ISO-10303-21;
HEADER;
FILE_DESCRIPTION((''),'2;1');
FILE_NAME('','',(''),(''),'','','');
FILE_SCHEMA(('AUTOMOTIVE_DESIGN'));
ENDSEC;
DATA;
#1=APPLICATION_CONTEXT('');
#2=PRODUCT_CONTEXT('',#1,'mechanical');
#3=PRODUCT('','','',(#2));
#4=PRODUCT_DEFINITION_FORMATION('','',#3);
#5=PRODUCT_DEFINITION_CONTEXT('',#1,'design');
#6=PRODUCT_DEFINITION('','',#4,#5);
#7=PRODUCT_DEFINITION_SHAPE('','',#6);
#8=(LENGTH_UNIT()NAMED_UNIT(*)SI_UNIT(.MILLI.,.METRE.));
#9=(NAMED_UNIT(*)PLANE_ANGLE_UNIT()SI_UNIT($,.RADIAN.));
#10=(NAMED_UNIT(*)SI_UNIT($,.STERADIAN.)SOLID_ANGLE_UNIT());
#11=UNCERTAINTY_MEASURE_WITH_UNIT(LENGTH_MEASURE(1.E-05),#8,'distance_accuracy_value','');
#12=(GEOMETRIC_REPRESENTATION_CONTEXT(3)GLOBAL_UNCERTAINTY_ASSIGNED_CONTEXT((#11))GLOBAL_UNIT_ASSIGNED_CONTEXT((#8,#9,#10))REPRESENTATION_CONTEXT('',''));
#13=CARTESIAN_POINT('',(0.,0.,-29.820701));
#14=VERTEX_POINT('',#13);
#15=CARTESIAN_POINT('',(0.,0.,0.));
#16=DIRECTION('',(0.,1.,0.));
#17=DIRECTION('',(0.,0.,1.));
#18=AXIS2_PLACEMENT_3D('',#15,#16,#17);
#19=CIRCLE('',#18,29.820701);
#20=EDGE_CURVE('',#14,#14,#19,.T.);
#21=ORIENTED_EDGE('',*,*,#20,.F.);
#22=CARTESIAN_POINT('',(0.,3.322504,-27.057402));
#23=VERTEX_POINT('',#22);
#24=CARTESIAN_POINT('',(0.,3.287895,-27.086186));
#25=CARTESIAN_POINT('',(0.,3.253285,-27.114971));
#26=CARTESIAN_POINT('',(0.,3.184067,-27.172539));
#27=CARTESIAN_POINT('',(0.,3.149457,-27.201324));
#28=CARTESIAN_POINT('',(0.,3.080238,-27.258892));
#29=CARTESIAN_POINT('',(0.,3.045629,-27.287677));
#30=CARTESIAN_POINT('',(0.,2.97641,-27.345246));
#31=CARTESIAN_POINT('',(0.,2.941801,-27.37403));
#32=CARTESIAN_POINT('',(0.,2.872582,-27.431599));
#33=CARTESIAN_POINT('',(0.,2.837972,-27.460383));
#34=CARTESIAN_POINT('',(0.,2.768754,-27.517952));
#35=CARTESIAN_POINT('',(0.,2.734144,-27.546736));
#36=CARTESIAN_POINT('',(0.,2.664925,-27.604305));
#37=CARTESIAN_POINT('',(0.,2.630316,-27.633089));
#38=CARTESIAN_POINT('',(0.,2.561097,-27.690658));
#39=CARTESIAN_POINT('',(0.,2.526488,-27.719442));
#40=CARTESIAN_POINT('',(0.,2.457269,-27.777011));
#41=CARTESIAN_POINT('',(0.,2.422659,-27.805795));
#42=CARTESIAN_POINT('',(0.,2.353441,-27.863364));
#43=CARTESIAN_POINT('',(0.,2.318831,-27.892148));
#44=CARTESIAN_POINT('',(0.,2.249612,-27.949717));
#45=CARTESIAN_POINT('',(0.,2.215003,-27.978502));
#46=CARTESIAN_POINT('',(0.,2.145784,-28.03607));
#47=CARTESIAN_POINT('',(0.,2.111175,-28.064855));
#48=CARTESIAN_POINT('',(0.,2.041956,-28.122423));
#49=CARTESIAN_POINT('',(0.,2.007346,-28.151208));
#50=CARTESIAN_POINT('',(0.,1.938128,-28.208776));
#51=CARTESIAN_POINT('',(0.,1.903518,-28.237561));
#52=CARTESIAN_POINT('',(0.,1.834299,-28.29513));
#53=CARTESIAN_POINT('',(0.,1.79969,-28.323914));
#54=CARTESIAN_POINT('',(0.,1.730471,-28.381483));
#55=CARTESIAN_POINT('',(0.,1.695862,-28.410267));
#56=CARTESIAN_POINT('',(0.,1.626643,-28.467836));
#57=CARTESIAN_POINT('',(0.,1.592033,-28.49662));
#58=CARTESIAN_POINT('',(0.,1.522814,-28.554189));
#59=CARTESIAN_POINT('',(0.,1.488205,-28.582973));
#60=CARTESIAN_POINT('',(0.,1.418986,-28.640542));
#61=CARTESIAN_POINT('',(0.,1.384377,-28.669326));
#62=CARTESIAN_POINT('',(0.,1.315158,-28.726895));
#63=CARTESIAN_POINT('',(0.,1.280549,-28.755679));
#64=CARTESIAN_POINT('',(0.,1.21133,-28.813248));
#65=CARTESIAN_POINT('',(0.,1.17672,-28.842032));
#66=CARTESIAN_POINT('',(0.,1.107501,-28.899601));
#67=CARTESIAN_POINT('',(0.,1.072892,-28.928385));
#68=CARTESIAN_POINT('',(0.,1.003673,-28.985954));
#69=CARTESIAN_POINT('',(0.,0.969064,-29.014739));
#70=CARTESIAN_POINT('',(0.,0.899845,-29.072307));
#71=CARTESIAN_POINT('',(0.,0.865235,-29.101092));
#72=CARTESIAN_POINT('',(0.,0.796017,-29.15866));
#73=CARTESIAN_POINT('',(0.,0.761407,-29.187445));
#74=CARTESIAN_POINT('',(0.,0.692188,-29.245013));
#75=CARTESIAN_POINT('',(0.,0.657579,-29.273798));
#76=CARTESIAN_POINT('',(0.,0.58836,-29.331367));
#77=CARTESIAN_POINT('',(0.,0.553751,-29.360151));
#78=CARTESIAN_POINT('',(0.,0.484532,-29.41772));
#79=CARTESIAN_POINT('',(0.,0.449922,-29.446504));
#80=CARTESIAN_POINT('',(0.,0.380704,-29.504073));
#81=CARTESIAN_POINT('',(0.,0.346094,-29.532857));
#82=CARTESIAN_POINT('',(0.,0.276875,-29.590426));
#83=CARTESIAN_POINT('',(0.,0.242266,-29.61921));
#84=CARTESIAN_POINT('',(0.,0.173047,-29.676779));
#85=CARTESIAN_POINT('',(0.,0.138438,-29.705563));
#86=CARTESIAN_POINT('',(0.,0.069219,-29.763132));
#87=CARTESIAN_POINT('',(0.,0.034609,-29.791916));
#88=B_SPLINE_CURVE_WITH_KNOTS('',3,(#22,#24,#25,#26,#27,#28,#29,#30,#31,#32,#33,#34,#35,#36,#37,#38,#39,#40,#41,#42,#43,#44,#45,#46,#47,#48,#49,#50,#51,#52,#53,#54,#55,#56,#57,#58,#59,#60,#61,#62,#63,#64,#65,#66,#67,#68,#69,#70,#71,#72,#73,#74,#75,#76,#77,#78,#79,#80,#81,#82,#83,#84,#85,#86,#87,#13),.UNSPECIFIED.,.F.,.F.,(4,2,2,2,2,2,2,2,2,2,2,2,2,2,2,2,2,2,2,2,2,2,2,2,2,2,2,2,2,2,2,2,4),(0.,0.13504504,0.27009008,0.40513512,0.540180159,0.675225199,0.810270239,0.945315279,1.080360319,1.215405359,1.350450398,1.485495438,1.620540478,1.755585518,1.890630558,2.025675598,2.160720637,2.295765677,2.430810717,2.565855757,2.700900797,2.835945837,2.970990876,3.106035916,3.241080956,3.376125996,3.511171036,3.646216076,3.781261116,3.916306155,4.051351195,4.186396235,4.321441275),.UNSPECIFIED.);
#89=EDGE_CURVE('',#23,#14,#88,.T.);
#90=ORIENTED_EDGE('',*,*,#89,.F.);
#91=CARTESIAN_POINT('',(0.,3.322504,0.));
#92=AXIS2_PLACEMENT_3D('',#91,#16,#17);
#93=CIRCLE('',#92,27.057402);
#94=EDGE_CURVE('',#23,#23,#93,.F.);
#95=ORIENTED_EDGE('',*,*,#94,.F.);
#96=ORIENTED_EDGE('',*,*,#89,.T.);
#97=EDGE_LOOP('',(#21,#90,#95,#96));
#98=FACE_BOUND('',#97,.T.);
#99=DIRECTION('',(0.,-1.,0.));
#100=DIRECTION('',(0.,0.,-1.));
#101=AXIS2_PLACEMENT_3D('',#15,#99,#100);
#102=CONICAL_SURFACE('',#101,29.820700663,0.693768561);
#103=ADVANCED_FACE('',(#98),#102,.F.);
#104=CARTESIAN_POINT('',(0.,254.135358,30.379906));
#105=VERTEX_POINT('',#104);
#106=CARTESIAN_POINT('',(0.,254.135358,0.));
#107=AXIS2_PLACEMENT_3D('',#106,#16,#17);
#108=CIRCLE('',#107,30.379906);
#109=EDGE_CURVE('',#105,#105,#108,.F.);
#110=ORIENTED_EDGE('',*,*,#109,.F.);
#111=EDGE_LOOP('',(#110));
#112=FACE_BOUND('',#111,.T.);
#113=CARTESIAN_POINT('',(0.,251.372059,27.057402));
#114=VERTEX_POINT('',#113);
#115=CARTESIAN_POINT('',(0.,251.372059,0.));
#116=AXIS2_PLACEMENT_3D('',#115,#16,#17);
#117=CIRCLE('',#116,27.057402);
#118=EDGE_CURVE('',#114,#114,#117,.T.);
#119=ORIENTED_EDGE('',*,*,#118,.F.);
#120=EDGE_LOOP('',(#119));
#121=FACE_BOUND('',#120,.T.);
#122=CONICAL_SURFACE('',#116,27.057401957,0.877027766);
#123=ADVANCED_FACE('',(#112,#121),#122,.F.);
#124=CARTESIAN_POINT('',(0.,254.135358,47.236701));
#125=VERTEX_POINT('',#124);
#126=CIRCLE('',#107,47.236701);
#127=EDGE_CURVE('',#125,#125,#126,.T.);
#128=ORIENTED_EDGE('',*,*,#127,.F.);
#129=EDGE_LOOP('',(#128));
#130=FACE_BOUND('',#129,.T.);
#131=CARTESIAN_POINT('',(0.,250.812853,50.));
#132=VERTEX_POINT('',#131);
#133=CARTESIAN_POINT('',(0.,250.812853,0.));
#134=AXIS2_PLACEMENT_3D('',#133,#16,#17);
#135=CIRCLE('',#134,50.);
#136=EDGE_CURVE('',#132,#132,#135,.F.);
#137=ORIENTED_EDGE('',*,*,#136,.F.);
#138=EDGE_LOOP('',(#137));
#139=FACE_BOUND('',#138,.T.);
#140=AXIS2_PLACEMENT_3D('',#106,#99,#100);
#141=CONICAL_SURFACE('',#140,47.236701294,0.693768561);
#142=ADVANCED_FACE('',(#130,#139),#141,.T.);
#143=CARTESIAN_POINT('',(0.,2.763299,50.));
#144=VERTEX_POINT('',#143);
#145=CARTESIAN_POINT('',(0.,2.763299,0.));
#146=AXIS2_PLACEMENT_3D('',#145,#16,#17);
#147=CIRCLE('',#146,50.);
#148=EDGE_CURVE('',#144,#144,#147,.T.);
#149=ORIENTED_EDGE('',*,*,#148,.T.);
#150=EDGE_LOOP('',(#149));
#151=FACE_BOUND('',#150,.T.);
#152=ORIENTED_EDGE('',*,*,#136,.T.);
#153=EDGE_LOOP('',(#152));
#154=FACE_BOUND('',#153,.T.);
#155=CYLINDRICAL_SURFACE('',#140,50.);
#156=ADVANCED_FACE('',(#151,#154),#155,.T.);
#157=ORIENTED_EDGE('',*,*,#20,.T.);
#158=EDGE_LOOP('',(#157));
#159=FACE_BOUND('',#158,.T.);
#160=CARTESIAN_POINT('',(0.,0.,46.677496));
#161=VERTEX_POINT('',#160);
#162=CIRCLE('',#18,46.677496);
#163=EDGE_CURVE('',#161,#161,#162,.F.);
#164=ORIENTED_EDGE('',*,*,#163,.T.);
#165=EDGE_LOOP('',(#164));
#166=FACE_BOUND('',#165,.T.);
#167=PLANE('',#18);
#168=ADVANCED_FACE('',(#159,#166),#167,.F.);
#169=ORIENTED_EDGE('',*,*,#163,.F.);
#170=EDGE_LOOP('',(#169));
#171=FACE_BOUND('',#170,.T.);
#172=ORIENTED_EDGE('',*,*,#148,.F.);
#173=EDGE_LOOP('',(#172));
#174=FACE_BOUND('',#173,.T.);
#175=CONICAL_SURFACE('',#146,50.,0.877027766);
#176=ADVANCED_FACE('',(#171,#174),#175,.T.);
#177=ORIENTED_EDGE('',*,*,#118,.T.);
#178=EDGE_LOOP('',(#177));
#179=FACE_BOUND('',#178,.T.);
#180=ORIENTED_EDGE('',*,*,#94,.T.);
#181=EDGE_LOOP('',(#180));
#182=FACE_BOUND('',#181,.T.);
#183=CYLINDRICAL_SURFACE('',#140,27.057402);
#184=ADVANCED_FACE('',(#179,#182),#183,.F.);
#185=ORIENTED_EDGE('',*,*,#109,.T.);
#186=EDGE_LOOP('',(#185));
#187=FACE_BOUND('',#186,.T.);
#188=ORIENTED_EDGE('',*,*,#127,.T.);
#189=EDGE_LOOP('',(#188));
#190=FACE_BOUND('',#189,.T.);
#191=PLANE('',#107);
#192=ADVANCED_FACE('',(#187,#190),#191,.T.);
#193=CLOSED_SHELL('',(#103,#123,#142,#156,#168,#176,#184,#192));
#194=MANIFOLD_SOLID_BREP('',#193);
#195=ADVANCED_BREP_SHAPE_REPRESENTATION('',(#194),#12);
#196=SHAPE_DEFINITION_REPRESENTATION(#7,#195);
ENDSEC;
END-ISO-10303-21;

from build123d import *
from OCP.BRepFilletAPI import BRepFilletAPI_MakeChamfer

# Parameters (mm, degrees)
SKETCH1_R           = 50
BOSS_EXTRUDE1_DEPTH = 254.135357599
SKETCH2_R           = 27.057401957
CUT_EXTRUDE1_DEPTH  = 264.789271924
CHAMFER1_SIZE       = 3.32250432
CHAMFER1_SIZE2      = 2.763298706


with BuildPart() as part:
    # Sketch1 → Boss-Extrude1 (new body)
    with BuildSketch(Plane(origin=(0, 0, 0), x_dir=(1, 0, 0), z_dir=(0, 1, 0))):
        Circle(SKETCH1_R)
    extrude(amount=BOSS_EXTRUDE1_DEPTH)

    # Sketch2 → Cut-Extrude1 (cut, through all)
    with BuildSketch(Plane(origin=(0, 0, 0), x_dir=(1, 0, 0), z_dir=(0, 1, 0))):
        Circle(SKETCH2_R)
    extrude(amount=CUT_EXTRUDE1_DEPTH, mode=Mode.SUBTRACT)

    # Chamfer1: one chamfer whose edges measure the first distance from different faces: ONE call of the kernel's chamfer builder (chamfer() names one face for all edges)
    chamfer1_edges_1 = [part.edges().sort_by_distance(p)[0] for p in [
        (-27.057401957, 254.135357599, 0),
    ]]
    chamfer1_side_1 = [part.faces().sort_by_distance(p)[0] for p in [
        (-48.585786438, 254.135357599, 0),
    ]]
    chamfer1_edges_2 = [part.edges().sort_by_distance(p)[0] for p in [
        (-27.057401957, 0, 0),
    ]]
    chamfer1_side_2 = [part.faces().sort_by_distance(p)[0] for p in [
        (-27.057401957, 127.0676788, 0),
    ]]
    chamfer1_edges_3 = [part.edges().sort_by_distance(p)[0] for p in [
        (-50, 0, 0),
    ]]
    chamfer1_side_3 = [part.faces().sort_by_distance(p)[0] for p in [
        (-48.585786438, 0, 0),
    ]]
    chamfer1_edges_4 = [part.edges().sort_by_distance(p)[0] for p in [
        (-50, 254.135357599, 0),
    ]]
    chamfer1_side_4 = [part.faces().sort_by_distance(p)[0] for p in [
        (-50, 127.0676788, 0),
    ]]
    chamfer1 = BRepFilletAPI_MakeChamfer(part.part.solid().wrapped)
    for e in chamfer1_edges_1:
        chamfer1.Add(CHAMFER1_SIZE, CHAMFER1_SIZE2, e.wrapped, chamfer1_side_1[0].wrapped)  # the first distance lies on this face
    for e in chamfer1_edges_2:
        chamfer1.Add(CHAMFER1_SIZE, CHAMFER1_SIZE2, e.wrapped, chamfer1_side_2[0].wrapped)  # the first distance lies on this face
    for e in chamfer1_edges_3:
        chamfer1.Add(CHAMFER1_SIZE, CHAMFER1_SIZE2, e.wrapped, chamfer1_side_3[0].wrapped)  # the first distance lies on this face
    for e in chamfer1_edges_4:
        chamfer1.Add(CHAMFER1_SIZE, CHAMFER1_SIZE2, e.wrapped, chamfer1_side_4[0].wrapped)  # the first distance lies on this face
    add(Compound.cast(chamfer1.Shape()), mode=Mode.REPLACE)


solid = part.part
